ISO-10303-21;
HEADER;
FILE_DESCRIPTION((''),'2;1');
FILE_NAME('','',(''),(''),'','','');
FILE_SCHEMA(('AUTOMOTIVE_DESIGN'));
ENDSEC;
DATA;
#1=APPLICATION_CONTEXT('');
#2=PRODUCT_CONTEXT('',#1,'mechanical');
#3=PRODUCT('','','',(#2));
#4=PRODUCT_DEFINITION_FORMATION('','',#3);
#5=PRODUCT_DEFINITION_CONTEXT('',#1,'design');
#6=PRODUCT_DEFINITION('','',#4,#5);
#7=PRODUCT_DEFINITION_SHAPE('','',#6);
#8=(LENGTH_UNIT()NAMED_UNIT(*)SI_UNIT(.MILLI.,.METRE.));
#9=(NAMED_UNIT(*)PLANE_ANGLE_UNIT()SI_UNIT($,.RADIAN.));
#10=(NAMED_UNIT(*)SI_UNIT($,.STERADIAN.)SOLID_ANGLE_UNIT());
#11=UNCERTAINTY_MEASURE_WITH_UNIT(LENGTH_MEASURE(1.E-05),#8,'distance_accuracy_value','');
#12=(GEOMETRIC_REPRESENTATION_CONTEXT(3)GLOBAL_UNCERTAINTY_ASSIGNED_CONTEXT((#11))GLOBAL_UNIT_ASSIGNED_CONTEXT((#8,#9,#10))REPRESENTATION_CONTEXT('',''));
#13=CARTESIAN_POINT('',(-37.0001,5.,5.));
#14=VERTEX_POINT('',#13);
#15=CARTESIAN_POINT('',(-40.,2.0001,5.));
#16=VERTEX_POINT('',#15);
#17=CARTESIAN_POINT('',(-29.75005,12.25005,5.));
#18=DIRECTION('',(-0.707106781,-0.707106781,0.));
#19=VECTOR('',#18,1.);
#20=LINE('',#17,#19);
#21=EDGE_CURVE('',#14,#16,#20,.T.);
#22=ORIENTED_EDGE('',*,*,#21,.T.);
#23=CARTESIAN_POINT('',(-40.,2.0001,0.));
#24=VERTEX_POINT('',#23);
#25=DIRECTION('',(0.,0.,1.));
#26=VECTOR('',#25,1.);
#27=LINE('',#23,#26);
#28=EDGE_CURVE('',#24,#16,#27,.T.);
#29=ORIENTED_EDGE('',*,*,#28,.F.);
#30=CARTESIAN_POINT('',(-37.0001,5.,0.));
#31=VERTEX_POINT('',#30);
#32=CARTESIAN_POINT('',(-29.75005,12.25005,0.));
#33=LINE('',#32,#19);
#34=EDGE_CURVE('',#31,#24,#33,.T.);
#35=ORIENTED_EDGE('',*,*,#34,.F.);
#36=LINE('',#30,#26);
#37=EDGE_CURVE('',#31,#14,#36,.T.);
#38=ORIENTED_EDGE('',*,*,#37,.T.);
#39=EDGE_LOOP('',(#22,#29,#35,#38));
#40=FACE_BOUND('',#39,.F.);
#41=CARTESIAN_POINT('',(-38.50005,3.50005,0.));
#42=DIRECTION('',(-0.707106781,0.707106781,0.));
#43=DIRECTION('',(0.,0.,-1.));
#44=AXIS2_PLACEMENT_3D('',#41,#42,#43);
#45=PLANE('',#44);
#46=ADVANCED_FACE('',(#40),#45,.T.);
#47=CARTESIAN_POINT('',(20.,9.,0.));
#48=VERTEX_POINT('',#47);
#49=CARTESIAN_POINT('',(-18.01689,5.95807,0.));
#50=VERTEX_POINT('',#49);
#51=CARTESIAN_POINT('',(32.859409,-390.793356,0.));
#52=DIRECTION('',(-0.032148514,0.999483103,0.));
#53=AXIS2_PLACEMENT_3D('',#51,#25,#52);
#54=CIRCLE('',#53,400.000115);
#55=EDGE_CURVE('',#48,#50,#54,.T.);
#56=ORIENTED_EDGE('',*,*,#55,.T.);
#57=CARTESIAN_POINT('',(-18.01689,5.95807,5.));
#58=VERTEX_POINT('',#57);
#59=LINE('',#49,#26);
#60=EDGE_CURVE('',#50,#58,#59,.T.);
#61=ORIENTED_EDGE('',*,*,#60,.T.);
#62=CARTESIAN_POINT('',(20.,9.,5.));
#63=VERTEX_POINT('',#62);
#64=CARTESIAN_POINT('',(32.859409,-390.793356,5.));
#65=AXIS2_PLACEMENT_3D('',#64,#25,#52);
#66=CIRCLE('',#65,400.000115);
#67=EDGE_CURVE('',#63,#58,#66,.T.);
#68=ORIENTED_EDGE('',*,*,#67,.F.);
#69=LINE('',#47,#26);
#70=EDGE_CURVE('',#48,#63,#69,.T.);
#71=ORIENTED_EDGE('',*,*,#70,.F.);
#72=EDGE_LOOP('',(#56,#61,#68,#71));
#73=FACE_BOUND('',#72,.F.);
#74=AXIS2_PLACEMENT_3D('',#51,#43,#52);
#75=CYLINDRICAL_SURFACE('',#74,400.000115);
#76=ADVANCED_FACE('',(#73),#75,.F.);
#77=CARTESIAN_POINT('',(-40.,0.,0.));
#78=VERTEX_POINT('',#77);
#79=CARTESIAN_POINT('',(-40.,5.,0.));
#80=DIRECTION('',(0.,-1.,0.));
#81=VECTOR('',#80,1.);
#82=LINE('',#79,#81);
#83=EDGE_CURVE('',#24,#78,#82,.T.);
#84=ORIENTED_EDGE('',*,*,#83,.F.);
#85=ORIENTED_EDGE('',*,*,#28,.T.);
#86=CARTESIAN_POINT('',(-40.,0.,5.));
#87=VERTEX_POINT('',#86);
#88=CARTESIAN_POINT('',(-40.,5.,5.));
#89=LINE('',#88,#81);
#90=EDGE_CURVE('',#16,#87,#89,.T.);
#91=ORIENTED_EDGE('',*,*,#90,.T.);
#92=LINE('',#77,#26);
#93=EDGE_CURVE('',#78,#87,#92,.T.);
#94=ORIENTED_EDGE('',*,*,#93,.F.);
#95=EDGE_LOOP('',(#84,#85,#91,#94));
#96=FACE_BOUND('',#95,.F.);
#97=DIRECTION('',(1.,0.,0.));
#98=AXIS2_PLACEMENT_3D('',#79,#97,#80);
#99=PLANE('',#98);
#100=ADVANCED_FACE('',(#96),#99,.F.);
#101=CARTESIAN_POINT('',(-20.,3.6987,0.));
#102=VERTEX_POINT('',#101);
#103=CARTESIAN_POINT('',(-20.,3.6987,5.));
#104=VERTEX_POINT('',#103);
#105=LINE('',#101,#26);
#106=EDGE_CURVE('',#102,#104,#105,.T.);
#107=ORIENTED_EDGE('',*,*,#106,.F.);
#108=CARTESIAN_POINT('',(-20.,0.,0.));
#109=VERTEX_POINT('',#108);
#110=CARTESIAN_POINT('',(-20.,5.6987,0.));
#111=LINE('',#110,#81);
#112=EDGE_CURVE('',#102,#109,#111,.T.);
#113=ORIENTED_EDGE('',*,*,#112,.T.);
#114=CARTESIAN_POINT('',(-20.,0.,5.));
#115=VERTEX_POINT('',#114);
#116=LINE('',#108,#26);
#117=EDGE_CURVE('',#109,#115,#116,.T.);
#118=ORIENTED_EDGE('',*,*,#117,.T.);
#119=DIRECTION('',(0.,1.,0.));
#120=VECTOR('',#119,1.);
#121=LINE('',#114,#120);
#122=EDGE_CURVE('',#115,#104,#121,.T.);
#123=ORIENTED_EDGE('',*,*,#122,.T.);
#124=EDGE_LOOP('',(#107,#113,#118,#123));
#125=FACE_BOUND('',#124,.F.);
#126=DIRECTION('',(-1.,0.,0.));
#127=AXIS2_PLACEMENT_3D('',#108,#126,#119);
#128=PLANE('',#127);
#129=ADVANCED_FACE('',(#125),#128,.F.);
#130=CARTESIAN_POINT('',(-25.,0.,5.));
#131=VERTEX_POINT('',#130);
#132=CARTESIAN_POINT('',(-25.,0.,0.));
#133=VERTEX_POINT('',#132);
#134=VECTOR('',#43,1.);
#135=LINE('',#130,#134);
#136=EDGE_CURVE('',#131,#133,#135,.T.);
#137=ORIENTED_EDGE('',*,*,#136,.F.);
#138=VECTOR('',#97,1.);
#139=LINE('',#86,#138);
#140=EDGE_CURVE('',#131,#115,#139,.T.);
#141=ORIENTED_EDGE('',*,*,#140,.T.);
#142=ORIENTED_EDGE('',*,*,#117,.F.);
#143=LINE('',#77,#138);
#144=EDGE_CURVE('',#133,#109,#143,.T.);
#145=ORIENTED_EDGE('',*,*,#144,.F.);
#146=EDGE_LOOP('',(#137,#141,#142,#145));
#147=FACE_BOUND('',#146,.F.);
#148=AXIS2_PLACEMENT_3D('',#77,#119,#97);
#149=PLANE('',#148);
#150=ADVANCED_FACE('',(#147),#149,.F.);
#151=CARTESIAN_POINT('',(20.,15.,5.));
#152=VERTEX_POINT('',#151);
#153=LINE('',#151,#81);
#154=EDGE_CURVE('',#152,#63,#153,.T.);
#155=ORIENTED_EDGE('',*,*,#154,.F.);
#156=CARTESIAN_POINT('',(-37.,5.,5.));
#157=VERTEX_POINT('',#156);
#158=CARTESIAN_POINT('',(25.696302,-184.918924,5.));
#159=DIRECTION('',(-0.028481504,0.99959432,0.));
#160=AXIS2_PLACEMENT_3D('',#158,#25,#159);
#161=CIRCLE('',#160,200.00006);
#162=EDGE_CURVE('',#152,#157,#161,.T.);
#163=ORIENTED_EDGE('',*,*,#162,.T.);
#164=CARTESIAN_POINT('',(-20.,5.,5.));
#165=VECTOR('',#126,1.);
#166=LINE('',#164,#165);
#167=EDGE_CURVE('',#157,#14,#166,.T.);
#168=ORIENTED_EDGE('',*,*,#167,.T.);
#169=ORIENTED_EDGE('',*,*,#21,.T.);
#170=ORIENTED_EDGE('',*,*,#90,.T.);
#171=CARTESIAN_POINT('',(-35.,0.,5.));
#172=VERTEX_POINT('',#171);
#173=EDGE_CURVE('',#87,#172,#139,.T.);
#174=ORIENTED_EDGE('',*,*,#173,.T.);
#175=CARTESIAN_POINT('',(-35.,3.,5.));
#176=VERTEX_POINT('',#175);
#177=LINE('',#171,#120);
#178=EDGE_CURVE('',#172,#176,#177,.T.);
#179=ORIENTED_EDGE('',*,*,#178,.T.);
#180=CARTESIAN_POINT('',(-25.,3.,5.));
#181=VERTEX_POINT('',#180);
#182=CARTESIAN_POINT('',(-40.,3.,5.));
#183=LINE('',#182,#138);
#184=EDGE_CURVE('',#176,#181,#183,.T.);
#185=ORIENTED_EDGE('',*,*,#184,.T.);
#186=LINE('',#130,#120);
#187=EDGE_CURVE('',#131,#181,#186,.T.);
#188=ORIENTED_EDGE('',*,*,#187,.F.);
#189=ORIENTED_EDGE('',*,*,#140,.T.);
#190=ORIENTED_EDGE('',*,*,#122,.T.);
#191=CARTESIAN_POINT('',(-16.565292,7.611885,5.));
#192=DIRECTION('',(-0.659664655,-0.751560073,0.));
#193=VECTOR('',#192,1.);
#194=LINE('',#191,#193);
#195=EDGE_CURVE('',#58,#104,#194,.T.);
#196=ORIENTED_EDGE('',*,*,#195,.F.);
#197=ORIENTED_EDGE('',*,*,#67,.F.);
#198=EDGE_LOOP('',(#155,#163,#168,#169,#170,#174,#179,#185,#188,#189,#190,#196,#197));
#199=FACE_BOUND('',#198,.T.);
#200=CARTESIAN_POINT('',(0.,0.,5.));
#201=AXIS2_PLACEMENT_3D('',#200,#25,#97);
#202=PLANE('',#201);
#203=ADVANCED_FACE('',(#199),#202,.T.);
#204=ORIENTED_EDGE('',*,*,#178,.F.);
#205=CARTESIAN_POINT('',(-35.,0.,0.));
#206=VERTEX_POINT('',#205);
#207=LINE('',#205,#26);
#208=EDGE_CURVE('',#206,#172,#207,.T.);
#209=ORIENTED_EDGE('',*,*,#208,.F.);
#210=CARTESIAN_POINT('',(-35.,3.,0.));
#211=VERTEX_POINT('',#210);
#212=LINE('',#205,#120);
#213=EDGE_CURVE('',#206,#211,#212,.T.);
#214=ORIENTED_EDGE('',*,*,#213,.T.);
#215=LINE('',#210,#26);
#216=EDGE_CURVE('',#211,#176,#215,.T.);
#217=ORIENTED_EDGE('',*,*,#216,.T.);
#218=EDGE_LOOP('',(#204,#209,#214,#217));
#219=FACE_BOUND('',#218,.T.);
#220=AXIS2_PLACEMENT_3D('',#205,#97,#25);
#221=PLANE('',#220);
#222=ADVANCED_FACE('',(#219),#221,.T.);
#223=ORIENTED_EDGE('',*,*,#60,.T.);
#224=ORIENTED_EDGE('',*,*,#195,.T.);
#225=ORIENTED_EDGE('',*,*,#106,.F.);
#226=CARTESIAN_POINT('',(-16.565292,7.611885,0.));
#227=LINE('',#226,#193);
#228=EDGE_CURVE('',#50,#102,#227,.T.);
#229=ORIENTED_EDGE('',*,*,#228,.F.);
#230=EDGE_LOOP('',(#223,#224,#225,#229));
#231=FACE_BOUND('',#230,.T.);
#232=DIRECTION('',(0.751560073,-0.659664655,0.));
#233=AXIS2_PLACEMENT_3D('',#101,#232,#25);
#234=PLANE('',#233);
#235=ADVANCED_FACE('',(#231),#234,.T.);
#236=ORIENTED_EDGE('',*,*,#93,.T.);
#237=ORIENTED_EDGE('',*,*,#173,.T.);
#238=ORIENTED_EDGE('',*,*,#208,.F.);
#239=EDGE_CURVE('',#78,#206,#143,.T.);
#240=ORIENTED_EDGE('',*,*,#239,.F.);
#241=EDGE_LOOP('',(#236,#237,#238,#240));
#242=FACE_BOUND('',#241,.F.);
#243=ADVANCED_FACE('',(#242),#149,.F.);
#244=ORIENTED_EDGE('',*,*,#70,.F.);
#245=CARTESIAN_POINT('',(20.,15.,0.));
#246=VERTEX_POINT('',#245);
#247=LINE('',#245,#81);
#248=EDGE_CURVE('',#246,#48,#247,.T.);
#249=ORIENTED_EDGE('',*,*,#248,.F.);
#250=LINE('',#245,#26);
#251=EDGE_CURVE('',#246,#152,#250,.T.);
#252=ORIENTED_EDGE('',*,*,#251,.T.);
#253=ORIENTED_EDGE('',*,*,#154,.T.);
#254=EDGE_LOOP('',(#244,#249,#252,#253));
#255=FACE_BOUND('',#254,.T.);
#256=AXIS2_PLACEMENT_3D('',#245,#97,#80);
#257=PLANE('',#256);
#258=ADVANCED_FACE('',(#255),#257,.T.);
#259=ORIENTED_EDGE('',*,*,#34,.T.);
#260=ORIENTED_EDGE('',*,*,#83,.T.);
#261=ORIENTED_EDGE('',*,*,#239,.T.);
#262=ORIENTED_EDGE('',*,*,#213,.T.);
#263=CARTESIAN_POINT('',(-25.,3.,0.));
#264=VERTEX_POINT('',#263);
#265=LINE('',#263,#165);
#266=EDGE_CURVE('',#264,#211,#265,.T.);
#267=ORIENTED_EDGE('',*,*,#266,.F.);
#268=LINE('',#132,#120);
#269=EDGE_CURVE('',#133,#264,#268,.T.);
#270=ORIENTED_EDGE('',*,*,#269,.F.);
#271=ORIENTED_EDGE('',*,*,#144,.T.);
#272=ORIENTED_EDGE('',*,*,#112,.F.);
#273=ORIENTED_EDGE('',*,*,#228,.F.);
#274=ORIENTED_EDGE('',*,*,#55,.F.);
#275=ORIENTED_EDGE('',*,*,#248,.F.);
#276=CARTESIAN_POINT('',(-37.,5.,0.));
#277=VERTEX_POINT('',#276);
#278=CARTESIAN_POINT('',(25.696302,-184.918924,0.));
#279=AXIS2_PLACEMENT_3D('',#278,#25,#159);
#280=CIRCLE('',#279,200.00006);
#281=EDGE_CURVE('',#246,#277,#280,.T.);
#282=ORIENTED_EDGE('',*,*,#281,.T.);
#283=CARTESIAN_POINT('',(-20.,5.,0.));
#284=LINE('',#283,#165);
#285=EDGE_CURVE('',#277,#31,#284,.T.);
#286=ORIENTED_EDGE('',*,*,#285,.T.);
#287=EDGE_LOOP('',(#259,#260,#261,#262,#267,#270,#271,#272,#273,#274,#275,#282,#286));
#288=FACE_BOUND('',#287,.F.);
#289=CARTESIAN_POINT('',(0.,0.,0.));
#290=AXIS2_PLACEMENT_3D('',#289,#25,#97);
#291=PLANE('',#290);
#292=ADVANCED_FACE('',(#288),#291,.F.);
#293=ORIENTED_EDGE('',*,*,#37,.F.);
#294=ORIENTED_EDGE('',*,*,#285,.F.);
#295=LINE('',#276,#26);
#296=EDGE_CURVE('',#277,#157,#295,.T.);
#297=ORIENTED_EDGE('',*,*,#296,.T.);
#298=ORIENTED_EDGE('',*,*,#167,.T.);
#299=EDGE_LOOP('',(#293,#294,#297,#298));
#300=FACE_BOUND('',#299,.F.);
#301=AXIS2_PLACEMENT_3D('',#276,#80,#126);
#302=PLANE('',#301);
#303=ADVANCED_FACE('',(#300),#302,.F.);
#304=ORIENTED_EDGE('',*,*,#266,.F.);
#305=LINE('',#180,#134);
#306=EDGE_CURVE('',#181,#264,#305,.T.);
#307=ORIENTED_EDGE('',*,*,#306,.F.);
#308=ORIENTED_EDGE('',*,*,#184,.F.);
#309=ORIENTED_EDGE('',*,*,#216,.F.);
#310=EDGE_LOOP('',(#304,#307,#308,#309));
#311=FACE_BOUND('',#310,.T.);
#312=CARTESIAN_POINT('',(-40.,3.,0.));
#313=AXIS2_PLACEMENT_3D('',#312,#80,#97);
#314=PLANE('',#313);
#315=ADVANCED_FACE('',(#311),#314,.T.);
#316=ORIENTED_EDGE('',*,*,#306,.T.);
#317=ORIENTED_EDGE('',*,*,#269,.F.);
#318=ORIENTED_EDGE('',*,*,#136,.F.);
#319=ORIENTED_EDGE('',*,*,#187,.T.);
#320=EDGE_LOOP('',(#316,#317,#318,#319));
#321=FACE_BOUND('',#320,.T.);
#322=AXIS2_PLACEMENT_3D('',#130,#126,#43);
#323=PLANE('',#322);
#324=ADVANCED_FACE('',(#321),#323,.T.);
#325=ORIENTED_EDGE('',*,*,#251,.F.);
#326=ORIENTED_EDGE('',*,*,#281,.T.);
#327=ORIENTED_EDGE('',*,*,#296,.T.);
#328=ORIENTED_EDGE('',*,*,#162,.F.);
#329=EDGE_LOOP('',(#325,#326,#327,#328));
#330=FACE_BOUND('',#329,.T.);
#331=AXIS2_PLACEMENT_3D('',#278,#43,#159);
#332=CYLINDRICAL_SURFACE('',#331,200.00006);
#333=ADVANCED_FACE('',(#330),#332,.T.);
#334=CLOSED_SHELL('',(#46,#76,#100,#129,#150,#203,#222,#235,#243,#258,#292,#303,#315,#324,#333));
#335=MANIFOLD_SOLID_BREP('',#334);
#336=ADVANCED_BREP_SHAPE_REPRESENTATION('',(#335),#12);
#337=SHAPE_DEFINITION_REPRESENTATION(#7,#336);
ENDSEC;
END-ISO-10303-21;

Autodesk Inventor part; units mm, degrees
ref_plane "YZ Plane" through (0, 0, 0) normal (1, 0, 0) x (0, 1, 0)
ref_plane "XZ Plane" through (0, 0, 0) normal (0, 1, 0) x (-1, 0, 0)
ref_plane "XY Plane" through (0, 0, 0) normal (0, 0, 1) x (1, 0, 0)
sketch "Sketch1" plane through (0, 0, 0) normal (0, 0, 1) x (1, 0, 0)
  line L0 (-40, 0) -> (-20, 0)
  line L1 (-20, 0) -> (-20, 5)
  line L2 (-20, 5) -> (-40, 5)
  line L3 (-40, 5) -> (-40, 0)
  arc A0 (20, 15) -> (-37, 5) centre (25.6963, -184.9189) ccw
  arc A1 (20, 9) -> (-25, 5) centre (32.8594, -390.7932) ccw
  line L4 (-37, 5) -> (-25, 5)
  line L5 (20, 15) -> (20, 9)
  line L6 (-20, 5) -> (-20, 5.6987)
  point P0 (0, 0)
  dimension "d0" = 20
  dimension "d9" = 5
  dimension "d11" = 40
  dimension "d13" = 20
  dimension "d14" = 5
  dimension "d16" = 10
  dimension "d17" = 3
  dimension "d19" = 6
  dimension "d20" = 40
  dimension "d21" = 200
  dimension "d22" = 400
  dimension "d24" = 12
extrude "Extrusion3" add sketch "Sketch1" along normal blind 5
sketch "Sketch3" plane through (-40, 0, 0) normal (0, -1, 0) x (1, 0, 0)
  line L0 (0, 5) -> (20, 5) projected
  line L1 (5, 5) -> (15, 5)
  line L2 (15, 5) -> (15, 0)
  line L3 (15, 0) -> (5, 0)
  line L4 (5, 0) -> (5, 5)
  line L5 (0, 0) -> (0, 5) projected
  point P0 (40, 0)
  dimension "d27" = 10
  dimension "d28" = 5
extrude "Extrusion4" cut sketch "Sketch3" against normal blind 3
chamfer "Chamfer1" distance 2 angle 45 1 edges at (-20, 5.6987, 2.5)
chamfer "Chamfer2" distance 3 angle 45 1 edges at (-40, 5, 2.5)
properties part number "CameraArm"
